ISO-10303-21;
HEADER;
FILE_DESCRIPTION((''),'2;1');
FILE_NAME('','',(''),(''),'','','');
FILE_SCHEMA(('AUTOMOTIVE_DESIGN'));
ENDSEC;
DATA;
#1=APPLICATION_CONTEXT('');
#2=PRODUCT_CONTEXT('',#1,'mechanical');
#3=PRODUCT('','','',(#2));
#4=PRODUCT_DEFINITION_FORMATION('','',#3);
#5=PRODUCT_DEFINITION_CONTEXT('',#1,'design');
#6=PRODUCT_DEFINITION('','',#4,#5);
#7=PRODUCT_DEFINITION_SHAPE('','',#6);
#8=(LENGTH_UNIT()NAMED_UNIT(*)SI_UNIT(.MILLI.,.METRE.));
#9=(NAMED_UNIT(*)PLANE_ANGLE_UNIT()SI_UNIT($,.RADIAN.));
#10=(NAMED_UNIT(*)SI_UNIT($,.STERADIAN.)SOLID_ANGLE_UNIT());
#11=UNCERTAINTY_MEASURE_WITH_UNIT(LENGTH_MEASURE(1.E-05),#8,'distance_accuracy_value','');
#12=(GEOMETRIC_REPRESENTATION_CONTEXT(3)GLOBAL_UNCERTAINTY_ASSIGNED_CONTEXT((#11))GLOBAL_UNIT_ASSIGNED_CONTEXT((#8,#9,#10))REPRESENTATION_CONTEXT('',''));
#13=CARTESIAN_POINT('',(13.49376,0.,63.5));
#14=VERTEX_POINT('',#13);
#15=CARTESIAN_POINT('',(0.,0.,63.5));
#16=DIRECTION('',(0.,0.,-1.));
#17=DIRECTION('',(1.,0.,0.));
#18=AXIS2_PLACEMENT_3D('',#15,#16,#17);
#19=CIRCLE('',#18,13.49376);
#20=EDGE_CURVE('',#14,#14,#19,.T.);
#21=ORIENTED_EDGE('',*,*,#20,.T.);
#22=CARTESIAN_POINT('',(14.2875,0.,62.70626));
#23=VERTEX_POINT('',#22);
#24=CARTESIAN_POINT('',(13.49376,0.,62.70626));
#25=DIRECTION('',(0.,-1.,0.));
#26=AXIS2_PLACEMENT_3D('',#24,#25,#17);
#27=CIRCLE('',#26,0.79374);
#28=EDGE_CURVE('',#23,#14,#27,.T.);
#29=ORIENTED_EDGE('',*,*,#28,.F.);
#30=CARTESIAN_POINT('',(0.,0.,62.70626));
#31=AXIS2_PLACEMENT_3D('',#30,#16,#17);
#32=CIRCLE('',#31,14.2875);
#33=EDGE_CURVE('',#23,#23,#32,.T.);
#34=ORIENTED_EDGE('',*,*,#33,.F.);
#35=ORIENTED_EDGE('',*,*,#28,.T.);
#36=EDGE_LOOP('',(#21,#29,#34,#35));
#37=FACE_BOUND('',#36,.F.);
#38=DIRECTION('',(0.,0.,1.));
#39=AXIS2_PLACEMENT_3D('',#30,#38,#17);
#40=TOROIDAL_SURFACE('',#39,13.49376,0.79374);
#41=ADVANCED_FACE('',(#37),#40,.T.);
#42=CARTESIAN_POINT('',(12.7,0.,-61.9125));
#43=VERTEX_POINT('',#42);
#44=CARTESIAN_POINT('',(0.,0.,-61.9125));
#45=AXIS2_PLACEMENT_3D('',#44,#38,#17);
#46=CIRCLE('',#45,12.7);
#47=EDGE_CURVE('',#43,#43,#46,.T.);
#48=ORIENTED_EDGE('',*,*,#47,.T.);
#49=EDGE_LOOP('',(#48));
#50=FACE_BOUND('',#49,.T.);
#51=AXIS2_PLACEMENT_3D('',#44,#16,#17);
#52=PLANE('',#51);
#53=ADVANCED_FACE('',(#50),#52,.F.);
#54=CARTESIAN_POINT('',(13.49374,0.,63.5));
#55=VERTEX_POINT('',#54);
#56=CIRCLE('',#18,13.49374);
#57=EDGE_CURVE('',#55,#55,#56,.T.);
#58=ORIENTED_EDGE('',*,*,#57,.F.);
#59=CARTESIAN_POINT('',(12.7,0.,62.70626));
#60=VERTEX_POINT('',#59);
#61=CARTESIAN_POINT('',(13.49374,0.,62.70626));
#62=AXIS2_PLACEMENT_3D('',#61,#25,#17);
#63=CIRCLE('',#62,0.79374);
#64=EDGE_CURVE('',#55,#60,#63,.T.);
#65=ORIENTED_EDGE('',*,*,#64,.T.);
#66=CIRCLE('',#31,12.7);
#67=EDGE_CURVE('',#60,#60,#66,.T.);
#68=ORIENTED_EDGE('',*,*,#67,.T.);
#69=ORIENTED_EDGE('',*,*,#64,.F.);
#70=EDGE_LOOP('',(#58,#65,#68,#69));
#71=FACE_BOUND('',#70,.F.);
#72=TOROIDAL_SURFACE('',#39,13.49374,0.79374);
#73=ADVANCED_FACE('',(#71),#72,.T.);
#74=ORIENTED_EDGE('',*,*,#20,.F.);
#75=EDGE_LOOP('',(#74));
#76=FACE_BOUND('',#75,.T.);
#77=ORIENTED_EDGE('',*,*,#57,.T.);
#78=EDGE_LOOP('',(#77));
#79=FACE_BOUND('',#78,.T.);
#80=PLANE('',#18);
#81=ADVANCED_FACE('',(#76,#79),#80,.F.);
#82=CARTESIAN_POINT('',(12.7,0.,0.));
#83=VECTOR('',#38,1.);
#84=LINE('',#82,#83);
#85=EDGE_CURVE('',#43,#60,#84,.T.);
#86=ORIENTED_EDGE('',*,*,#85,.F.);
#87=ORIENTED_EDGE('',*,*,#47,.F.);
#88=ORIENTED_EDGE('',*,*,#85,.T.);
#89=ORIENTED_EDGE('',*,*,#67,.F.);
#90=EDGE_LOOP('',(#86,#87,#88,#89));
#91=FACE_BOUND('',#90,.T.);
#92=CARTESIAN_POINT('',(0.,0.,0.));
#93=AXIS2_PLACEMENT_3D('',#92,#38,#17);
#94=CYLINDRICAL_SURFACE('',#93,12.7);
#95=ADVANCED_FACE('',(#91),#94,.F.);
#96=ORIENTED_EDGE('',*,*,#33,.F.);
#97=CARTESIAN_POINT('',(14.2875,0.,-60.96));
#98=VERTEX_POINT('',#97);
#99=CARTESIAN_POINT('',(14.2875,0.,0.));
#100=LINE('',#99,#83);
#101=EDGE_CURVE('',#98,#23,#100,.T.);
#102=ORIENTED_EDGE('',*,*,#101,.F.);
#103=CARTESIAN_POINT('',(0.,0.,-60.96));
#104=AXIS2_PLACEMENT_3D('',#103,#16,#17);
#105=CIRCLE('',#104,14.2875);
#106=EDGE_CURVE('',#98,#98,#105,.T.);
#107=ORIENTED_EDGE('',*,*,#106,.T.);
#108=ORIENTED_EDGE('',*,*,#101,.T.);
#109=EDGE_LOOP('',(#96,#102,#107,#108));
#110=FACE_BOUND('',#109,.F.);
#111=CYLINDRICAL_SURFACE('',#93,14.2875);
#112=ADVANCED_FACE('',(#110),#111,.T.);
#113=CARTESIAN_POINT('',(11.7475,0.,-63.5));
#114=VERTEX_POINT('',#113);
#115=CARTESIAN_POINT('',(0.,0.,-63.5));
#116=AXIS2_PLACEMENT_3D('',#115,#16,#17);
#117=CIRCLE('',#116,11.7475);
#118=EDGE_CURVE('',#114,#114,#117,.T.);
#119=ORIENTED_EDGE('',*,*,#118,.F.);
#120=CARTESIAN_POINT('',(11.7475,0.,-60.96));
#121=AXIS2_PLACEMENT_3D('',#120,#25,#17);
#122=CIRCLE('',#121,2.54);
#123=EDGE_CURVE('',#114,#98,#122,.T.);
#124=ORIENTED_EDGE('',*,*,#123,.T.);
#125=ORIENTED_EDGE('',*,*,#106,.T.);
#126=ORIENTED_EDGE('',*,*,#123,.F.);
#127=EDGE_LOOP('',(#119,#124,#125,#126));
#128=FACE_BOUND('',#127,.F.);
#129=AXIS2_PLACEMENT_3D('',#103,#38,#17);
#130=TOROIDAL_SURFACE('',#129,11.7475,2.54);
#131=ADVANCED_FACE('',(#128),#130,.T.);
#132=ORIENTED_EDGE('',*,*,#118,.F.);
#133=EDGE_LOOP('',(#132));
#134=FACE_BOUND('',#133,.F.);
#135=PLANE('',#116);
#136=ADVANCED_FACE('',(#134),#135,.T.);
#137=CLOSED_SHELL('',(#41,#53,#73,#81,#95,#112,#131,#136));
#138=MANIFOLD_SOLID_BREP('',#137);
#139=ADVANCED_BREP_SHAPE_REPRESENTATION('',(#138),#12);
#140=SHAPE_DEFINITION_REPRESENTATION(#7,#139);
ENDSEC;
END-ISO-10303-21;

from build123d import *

# Parameters (mm, degrees)
F0_W = 14.2875
F0_H = 127
F2_T = -1.5875
F3_R = 2.54
F4_R = 0.79374


# Not quite as in the source:
# - a fillet or chamfer is up to 0.001 mm smaller than in the source, because OpenCascade refuses the exact size


with BuildPart() as f1:
    # F0 (on Front) → F1 (revolve)
    with BuildSketch(Plane.XZ):
        with Locations((7.14375, 0)):
            Rectangle(F0_W, F0_H)
    revolve(axis=Axis((0, 0, 0), (0, 0, -1)))

    # F2
    f2_openings = [f1.faces().sort_by_distance(p)[0] for p in [
        (0, 0, 63.5),
    ]]
    offset(amount=F2_T, openings=f2_openings)

    # F3
    f3_edges = [f1.edges().sort_by_distance(p)[0] for p in [
        (-14.2875, 0, -63.5),
    ]]
    fillet(f3_edges, radius=F3_R)

    # F4 (radius 0.79375 in the source; OpenCascade refuses exactly that, so slightly less here)
    f4_edges = [f1.edges().sort_by_distance(p)[0] for p in [
        (-14.2875, 0, 63.5),
        (-12.7, 0, 63.5),
    ]]
    fillet(f4_edges, radius=F4_R)


solid = f1.part
